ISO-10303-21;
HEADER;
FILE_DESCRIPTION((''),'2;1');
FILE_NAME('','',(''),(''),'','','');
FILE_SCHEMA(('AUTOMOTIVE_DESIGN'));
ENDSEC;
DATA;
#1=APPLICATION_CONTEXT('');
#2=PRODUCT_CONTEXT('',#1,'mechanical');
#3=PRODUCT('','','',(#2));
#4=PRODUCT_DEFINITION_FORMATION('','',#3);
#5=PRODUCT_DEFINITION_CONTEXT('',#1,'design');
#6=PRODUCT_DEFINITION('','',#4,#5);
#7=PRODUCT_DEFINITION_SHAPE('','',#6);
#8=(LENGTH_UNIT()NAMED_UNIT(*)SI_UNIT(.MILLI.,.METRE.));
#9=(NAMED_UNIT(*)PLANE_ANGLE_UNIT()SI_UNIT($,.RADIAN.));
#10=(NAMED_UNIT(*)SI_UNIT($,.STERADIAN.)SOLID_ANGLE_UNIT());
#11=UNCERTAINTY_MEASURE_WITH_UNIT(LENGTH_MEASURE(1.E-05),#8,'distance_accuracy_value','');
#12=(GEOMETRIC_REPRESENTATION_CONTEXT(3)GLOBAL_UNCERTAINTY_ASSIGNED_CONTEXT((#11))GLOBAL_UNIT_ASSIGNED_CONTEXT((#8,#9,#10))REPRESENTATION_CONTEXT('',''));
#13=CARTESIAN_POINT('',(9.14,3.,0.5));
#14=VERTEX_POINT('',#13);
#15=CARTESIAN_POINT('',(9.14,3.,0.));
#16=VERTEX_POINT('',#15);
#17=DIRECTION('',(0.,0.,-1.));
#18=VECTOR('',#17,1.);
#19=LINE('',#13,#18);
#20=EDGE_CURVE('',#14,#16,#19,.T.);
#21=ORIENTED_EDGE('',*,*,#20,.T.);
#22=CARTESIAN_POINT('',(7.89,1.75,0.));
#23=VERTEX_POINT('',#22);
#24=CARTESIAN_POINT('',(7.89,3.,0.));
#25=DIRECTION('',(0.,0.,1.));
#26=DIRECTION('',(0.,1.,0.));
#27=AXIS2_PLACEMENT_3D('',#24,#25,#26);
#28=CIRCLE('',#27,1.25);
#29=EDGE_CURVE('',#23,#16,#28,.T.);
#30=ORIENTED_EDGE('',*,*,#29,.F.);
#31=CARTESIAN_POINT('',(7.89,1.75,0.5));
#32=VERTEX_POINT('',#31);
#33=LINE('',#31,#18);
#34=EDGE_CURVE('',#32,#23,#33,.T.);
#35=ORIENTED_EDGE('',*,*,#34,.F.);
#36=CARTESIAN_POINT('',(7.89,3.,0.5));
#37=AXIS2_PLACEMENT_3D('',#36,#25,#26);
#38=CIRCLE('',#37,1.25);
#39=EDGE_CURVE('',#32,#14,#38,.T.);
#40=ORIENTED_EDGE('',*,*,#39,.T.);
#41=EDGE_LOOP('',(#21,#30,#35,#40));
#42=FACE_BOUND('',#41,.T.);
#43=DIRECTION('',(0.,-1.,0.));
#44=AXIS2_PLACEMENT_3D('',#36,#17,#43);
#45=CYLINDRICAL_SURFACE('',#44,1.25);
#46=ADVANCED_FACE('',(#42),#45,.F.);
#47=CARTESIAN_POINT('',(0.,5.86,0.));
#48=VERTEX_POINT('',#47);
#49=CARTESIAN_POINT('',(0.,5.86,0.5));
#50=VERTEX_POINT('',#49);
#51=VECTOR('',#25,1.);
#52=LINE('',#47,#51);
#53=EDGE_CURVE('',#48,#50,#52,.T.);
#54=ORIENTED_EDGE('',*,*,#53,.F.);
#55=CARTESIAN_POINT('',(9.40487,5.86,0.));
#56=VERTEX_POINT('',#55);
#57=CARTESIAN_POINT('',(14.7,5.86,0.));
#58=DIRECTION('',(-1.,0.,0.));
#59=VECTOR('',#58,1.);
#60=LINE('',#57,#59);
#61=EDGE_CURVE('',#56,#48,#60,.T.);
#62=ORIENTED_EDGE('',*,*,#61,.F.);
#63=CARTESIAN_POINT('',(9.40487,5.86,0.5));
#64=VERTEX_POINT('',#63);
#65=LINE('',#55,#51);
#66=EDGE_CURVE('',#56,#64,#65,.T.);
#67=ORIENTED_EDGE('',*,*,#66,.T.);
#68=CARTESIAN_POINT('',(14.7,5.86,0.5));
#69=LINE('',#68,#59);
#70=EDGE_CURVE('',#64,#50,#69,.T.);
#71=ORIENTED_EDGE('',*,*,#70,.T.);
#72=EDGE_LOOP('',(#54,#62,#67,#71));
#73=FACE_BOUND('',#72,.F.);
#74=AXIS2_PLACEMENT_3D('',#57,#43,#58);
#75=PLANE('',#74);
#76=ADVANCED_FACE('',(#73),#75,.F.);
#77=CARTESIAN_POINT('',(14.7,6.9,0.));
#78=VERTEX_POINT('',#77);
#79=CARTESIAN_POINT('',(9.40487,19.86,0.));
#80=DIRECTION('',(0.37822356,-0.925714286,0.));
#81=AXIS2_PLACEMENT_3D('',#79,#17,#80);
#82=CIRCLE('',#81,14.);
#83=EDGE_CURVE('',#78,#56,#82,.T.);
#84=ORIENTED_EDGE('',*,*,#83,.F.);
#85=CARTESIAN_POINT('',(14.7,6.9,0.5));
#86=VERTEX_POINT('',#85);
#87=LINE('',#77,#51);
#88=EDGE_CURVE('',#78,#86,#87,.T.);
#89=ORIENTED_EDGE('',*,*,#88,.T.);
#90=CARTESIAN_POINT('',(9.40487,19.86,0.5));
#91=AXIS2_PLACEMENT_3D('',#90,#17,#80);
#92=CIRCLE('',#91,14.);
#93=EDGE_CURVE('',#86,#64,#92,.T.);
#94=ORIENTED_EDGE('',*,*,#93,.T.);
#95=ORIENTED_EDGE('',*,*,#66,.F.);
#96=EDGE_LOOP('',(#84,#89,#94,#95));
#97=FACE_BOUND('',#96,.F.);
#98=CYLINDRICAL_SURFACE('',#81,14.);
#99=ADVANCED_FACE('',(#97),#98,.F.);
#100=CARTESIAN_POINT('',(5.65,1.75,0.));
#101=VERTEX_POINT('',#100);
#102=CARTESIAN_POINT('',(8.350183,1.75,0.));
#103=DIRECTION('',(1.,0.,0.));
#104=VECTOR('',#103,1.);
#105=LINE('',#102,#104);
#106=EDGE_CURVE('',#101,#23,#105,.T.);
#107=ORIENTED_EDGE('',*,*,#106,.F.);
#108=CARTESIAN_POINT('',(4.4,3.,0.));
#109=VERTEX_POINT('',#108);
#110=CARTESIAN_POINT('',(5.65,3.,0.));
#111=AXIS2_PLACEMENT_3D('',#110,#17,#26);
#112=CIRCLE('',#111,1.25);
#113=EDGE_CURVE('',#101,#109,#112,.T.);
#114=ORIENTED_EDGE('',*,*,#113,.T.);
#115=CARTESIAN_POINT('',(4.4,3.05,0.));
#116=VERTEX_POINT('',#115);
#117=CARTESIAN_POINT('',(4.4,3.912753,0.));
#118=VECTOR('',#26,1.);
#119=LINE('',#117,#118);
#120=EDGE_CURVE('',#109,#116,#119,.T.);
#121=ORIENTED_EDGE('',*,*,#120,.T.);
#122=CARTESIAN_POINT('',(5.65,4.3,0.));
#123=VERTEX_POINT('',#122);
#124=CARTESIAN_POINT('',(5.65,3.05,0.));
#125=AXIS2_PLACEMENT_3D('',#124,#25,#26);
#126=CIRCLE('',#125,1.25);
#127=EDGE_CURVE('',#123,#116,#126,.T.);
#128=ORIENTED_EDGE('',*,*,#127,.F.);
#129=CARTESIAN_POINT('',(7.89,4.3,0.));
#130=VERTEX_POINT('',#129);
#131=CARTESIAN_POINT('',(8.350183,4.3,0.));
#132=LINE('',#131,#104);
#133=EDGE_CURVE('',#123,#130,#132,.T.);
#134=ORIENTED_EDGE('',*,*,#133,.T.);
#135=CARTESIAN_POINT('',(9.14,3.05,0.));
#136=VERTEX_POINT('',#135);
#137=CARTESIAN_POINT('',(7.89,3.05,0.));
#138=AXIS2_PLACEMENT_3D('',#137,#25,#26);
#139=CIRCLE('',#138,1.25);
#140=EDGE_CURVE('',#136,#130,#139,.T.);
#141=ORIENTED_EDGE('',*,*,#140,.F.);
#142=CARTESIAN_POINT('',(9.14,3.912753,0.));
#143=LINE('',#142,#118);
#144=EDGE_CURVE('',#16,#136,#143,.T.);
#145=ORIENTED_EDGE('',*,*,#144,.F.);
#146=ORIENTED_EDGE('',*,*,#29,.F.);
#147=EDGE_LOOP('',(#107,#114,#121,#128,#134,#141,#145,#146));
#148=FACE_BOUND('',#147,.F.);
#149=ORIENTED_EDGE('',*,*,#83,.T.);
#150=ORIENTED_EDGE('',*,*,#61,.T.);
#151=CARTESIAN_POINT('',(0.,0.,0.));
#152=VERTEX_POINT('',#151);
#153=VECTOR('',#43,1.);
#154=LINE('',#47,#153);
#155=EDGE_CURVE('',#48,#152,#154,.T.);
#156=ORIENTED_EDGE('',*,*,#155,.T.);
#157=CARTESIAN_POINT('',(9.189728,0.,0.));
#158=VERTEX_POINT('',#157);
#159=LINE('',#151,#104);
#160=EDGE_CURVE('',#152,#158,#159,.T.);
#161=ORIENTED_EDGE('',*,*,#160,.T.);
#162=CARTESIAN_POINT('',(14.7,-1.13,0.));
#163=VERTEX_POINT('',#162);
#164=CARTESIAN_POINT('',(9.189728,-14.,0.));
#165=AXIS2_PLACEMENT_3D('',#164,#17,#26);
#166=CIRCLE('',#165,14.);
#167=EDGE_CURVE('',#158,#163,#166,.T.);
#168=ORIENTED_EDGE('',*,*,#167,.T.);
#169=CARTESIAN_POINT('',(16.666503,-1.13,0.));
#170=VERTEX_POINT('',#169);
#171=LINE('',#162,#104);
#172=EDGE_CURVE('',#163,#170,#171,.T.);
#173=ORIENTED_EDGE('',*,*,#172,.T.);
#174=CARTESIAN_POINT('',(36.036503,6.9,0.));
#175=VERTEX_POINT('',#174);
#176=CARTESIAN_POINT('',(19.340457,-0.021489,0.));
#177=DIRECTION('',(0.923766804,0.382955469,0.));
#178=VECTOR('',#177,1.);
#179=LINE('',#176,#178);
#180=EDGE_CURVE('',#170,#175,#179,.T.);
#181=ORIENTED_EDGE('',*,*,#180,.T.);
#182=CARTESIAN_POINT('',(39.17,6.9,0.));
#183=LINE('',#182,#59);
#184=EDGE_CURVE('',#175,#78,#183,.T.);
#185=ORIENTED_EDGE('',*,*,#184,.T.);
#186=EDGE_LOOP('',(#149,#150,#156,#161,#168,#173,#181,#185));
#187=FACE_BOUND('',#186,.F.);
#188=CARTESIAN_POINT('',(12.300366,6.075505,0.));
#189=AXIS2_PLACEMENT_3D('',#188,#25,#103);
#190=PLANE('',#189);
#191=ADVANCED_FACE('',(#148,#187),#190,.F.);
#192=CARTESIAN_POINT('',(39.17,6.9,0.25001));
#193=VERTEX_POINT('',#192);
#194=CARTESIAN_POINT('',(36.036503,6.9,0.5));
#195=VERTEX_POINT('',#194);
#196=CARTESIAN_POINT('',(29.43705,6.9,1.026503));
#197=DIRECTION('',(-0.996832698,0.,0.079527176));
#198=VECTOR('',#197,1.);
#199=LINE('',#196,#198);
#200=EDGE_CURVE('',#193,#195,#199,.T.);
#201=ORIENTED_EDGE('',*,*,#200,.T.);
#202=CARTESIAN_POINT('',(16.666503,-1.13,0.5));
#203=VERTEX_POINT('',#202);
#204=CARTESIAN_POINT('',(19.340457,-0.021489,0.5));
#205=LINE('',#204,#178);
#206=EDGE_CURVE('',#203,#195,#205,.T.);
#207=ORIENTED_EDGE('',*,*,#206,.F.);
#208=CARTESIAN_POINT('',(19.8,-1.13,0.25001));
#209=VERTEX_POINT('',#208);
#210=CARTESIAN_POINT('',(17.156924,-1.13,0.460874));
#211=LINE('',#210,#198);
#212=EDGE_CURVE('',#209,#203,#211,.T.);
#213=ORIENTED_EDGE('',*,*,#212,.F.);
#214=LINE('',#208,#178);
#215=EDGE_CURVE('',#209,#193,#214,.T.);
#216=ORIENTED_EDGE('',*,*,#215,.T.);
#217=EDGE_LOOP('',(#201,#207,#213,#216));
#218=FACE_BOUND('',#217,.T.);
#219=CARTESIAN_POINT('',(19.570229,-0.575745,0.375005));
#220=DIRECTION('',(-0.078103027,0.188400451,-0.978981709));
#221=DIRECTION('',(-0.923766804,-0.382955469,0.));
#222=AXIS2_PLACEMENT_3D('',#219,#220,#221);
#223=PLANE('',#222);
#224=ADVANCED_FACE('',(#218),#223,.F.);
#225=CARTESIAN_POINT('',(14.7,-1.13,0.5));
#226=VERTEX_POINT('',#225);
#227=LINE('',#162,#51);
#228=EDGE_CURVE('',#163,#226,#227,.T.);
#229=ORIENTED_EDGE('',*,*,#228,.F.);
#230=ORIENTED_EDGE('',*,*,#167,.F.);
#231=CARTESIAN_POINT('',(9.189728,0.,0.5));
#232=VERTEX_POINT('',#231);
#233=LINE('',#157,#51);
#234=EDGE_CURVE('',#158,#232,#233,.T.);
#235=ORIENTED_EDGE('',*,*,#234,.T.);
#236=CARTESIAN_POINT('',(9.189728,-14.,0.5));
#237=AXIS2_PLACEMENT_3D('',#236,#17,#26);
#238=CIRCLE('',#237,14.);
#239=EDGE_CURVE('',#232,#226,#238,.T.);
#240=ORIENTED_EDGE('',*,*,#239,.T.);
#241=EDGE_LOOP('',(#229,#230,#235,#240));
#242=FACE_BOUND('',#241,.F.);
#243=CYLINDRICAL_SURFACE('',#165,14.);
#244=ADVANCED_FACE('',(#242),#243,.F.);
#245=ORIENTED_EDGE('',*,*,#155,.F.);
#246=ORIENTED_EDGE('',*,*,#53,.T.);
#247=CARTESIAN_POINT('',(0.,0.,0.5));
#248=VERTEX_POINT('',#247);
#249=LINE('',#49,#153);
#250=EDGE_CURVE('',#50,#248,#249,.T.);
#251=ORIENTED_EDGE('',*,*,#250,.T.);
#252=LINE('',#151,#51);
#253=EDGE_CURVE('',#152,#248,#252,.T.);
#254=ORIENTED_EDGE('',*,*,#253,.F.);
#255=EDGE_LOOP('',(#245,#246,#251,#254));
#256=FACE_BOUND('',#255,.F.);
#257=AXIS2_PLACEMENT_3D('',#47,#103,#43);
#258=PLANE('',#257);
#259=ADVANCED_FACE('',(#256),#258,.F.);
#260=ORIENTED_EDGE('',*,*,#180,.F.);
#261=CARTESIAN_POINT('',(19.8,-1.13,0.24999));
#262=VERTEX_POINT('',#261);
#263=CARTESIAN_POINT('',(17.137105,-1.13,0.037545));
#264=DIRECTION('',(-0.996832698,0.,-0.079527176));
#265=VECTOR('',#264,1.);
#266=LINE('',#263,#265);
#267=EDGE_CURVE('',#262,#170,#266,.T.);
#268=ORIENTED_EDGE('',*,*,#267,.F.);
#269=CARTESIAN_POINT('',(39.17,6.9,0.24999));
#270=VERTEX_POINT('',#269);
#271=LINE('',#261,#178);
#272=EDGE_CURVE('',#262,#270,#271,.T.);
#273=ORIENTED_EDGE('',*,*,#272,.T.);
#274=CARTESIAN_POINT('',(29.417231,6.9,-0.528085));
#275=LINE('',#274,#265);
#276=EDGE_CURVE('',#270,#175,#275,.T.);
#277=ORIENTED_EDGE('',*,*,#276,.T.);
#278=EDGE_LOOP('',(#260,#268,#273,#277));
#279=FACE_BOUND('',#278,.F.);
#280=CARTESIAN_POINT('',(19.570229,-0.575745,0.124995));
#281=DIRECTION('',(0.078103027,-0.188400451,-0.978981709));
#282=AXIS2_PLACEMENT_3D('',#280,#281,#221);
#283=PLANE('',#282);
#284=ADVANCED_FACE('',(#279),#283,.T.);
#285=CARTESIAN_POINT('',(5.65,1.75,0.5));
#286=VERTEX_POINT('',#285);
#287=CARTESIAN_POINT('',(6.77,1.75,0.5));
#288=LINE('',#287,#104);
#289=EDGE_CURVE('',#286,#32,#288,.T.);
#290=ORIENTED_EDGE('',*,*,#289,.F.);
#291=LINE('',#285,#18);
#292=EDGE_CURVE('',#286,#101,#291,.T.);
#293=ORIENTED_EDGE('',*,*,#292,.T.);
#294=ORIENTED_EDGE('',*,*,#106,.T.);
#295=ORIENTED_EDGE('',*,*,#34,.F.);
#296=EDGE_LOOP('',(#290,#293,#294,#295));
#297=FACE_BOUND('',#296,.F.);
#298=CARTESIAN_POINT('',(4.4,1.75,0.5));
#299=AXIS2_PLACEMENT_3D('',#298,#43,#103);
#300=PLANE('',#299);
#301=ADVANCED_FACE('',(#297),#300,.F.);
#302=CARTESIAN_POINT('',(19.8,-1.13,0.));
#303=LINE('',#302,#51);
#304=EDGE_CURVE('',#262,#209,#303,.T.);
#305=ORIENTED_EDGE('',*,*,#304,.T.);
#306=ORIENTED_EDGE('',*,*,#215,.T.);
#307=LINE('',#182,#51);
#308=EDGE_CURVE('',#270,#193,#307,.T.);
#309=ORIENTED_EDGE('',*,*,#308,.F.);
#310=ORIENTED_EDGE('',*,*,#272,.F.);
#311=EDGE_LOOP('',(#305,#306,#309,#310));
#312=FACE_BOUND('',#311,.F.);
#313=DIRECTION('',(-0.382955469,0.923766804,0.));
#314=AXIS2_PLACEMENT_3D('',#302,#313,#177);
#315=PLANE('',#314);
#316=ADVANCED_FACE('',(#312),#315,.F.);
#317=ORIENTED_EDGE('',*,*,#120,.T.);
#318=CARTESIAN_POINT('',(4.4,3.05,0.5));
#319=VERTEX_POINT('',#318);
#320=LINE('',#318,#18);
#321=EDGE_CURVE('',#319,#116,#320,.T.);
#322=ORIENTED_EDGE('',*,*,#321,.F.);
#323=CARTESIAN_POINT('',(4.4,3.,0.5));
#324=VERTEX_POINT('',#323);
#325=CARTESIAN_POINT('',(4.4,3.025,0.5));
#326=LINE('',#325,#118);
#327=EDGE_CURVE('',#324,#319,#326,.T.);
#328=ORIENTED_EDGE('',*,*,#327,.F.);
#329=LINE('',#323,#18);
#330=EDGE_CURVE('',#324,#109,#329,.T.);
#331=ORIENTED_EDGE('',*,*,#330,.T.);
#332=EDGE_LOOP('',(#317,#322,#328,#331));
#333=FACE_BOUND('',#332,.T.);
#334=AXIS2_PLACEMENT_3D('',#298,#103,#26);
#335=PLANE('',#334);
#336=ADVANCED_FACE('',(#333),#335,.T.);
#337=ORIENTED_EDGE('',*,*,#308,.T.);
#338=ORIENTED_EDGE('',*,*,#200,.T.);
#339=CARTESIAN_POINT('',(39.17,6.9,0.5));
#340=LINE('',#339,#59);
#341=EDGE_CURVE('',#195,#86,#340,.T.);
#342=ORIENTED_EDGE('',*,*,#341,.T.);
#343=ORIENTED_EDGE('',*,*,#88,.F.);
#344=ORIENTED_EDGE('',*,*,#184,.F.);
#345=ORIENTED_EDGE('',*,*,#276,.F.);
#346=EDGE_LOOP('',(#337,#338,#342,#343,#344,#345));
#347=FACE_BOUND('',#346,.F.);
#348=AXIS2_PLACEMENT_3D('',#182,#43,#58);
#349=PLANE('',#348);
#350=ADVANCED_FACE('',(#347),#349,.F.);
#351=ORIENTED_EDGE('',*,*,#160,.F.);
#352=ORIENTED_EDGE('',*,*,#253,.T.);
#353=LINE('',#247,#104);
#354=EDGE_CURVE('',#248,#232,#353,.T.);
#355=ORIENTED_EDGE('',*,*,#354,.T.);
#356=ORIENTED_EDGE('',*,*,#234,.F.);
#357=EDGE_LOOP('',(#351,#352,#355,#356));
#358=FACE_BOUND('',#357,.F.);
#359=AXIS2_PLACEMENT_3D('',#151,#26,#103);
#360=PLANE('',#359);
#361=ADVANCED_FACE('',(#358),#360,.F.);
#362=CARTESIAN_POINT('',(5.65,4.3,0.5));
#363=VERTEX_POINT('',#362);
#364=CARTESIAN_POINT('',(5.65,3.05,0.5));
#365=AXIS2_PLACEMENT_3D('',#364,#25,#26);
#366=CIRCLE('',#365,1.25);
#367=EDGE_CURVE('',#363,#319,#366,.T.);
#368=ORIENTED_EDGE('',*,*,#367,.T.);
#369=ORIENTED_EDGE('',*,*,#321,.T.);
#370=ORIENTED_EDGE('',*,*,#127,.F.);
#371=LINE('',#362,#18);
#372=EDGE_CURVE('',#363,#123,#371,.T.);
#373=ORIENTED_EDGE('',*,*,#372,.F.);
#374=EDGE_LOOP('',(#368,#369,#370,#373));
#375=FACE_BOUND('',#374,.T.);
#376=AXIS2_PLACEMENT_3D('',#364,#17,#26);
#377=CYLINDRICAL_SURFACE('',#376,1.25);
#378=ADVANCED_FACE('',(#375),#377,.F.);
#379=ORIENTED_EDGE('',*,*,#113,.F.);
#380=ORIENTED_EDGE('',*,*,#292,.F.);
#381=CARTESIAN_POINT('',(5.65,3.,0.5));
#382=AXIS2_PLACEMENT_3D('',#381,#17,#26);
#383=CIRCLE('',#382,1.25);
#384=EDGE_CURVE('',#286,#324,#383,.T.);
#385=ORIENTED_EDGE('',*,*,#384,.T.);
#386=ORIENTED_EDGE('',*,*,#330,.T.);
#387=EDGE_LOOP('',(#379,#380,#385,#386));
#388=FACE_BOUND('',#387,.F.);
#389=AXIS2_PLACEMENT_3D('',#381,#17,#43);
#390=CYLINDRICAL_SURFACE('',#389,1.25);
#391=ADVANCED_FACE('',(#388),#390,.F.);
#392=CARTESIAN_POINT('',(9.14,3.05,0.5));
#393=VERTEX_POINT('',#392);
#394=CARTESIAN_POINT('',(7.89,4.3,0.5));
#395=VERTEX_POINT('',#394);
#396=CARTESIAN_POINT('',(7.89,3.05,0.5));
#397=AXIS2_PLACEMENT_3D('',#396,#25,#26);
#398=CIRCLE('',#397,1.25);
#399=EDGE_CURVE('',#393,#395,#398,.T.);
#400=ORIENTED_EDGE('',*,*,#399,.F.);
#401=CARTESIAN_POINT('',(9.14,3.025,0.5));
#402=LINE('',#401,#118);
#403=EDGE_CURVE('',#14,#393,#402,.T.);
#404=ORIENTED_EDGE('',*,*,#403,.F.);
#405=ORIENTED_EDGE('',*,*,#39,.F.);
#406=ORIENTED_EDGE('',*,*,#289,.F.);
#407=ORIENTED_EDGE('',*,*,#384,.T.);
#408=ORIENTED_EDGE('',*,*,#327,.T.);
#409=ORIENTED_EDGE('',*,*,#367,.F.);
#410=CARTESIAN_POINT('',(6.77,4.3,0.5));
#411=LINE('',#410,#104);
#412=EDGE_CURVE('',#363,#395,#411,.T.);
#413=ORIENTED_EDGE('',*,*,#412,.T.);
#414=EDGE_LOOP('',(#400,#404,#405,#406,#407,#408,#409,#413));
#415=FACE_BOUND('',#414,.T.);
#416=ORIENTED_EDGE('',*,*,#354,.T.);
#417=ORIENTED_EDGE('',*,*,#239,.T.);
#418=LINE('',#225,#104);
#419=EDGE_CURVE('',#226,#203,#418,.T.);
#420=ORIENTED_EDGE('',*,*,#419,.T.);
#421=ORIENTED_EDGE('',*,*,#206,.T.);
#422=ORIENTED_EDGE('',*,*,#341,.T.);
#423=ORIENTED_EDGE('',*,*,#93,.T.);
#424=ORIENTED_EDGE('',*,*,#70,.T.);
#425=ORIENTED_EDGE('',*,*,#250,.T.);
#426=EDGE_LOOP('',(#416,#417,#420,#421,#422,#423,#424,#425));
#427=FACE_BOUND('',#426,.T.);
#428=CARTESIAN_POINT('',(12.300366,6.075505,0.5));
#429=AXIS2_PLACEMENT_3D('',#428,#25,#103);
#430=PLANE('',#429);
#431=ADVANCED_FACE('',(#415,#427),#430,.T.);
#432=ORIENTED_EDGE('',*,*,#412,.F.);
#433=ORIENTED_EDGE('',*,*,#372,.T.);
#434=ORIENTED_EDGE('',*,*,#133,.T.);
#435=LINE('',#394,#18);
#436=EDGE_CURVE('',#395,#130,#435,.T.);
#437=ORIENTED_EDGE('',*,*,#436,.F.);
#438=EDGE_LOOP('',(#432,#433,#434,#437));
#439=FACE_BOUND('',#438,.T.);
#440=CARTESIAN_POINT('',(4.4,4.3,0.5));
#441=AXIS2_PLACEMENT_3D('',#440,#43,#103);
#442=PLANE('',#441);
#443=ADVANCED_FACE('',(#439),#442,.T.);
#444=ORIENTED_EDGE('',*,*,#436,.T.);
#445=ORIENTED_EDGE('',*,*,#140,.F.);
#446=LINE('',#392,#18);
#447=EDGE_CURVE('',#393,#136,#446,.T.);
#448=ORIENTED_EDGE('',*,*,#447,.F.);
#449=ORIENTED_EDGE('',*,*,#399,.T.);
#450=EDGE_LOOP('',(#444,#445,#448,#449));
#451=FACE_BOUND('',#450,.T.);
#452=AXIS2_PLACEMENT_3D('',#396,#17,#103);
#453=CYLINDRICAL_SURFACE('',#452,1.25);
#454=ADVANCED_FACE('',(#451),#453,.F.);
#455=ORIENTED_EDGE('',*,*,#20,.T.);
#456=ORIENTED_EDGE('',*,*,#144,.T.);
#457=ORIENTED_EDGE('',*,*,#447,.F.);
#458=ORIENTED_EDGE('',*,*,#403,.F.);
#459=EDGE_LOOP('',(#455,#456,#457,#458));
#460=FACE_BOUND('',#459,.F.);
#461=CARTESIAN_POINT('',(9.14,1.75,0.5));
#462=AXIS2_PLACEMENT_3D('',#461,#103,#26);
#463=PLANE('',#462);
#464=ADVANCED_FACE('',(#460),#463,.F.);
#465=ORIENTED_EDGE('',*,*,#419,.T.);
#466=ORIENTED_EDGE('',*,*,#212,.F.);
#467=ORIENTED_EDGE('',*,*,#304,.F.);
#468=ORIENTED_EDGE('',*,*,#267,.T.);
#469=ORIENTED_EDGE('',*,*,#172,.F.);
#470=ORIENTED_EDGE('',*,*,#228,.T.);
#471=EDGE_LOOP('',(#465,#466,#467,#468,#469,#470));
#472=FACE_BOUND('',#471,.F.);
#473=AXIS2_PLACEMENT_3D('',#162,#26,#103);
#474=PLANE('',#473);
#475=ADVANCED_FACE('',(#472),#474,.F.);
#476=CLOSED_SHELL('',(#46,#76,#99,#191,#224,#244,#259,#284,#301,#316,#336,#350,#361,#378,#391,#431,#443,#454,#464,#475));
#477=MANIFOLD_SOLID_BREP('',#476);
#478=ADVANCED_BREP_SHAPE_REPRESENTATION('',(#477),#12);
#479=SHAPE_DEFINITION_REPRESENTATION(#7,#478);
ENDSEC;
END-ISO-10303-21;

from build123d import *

# Parameters (mm, degrees)
F1_DEPTH    = 0.5
F2_T1_DEPTH = 0.5
F3_W        = 4.74
F3_H        = 2.55
F4_DEPTH    = 0.501
F5_R        = 1.25
F6_SIZE2    = 1.19999
F6_SIZE     = 0.24999


# Not quite as in the source:
# - a fillet or chamfer that OpenCascade refuses, or shapes differently, is made with other operations: its cross-section is extruded or revolved along the edge and cut away or added
# - a fillet or chamfer is up to 0.001 mm smaller than in the source, because OpenCascade refuses the exact size


with BuildPart() as f1:
    # F0 (on Top) → F1 (new body)
    with BuildSketch(Plane.XY):
        Polygon((0, 5.86), (0, 0), (14.7, 0), (14.7, -1.13), (19.8, -1.13), (39.17, 6.9), (14.7, 6.9), (14.7, 5.86), align=None)
    extrude(amount=F1_DEPTH)

    # F2: fillet of radius 14 on 2 edges, made by hand

    # F2_s2 → F2_t1 (join)
    with BuildSketch(Plane.XY):
        with BuildLine():
            ThreePointArc((14.7, 6.9), (12.1030176748, 6.1224601911), (9.4048701621, 5.86))
            Line((9.4048701621, 5.86), (14.7, 5.86))
            Line((14.7, 5.86), (14.7, 6.9))
        make_face()
        with BuildLine():
            ThreePointArc((9.1897277744, 0), (12.0021999965, -0.2854092296), (14.7, -1.13))
            Line((14.7, -1.13), (14.7, 0))
            Line((14.7, 0), (9.1897277744, 0))
        make_face()
    extrude(amount=F2_T1_DEPTH)

    # F3 (on face) → F4 (cut, through all)
    with BuildSketch(Plane.XY.offset(0.5)):
        with Locations((6.77, 3.025)):
            Rectangle(F3_W, F3_H)
    extrude(amount=-F4_DEPTH, mode=Mode.SUBTRACT)

    # F5
    f5_edges = [f1.edges().sort_by_distance(p)[0] for p in [
        (9.14, 1.75, 0.25),
        (4.4, 1.75, 0.25),
        (4.4, 4.3, 0.25),
        (9.14, 4.3, 0.25),
    ]]
    fillet(f5_edges, radius=F5_R)

    # F6 (size 0.25 and 1.2 in the source; OpenCascade refuses exactly that, so slightly less here)
    f6_edges = [f1.edges().sort_by_distance(p)[0] for p in [
        (29.485, 2.885, 0.5),
        (29.485, 2.885, 0),
    ]]
    f6_side = f1.faces().sort_by_distance((29.485, 2.885, 0.25))[0]
    chamfer(f6_edges, length=F6_SIZE, length2=F6_SIZE2, reference=f6_side)


solid = f1.part
